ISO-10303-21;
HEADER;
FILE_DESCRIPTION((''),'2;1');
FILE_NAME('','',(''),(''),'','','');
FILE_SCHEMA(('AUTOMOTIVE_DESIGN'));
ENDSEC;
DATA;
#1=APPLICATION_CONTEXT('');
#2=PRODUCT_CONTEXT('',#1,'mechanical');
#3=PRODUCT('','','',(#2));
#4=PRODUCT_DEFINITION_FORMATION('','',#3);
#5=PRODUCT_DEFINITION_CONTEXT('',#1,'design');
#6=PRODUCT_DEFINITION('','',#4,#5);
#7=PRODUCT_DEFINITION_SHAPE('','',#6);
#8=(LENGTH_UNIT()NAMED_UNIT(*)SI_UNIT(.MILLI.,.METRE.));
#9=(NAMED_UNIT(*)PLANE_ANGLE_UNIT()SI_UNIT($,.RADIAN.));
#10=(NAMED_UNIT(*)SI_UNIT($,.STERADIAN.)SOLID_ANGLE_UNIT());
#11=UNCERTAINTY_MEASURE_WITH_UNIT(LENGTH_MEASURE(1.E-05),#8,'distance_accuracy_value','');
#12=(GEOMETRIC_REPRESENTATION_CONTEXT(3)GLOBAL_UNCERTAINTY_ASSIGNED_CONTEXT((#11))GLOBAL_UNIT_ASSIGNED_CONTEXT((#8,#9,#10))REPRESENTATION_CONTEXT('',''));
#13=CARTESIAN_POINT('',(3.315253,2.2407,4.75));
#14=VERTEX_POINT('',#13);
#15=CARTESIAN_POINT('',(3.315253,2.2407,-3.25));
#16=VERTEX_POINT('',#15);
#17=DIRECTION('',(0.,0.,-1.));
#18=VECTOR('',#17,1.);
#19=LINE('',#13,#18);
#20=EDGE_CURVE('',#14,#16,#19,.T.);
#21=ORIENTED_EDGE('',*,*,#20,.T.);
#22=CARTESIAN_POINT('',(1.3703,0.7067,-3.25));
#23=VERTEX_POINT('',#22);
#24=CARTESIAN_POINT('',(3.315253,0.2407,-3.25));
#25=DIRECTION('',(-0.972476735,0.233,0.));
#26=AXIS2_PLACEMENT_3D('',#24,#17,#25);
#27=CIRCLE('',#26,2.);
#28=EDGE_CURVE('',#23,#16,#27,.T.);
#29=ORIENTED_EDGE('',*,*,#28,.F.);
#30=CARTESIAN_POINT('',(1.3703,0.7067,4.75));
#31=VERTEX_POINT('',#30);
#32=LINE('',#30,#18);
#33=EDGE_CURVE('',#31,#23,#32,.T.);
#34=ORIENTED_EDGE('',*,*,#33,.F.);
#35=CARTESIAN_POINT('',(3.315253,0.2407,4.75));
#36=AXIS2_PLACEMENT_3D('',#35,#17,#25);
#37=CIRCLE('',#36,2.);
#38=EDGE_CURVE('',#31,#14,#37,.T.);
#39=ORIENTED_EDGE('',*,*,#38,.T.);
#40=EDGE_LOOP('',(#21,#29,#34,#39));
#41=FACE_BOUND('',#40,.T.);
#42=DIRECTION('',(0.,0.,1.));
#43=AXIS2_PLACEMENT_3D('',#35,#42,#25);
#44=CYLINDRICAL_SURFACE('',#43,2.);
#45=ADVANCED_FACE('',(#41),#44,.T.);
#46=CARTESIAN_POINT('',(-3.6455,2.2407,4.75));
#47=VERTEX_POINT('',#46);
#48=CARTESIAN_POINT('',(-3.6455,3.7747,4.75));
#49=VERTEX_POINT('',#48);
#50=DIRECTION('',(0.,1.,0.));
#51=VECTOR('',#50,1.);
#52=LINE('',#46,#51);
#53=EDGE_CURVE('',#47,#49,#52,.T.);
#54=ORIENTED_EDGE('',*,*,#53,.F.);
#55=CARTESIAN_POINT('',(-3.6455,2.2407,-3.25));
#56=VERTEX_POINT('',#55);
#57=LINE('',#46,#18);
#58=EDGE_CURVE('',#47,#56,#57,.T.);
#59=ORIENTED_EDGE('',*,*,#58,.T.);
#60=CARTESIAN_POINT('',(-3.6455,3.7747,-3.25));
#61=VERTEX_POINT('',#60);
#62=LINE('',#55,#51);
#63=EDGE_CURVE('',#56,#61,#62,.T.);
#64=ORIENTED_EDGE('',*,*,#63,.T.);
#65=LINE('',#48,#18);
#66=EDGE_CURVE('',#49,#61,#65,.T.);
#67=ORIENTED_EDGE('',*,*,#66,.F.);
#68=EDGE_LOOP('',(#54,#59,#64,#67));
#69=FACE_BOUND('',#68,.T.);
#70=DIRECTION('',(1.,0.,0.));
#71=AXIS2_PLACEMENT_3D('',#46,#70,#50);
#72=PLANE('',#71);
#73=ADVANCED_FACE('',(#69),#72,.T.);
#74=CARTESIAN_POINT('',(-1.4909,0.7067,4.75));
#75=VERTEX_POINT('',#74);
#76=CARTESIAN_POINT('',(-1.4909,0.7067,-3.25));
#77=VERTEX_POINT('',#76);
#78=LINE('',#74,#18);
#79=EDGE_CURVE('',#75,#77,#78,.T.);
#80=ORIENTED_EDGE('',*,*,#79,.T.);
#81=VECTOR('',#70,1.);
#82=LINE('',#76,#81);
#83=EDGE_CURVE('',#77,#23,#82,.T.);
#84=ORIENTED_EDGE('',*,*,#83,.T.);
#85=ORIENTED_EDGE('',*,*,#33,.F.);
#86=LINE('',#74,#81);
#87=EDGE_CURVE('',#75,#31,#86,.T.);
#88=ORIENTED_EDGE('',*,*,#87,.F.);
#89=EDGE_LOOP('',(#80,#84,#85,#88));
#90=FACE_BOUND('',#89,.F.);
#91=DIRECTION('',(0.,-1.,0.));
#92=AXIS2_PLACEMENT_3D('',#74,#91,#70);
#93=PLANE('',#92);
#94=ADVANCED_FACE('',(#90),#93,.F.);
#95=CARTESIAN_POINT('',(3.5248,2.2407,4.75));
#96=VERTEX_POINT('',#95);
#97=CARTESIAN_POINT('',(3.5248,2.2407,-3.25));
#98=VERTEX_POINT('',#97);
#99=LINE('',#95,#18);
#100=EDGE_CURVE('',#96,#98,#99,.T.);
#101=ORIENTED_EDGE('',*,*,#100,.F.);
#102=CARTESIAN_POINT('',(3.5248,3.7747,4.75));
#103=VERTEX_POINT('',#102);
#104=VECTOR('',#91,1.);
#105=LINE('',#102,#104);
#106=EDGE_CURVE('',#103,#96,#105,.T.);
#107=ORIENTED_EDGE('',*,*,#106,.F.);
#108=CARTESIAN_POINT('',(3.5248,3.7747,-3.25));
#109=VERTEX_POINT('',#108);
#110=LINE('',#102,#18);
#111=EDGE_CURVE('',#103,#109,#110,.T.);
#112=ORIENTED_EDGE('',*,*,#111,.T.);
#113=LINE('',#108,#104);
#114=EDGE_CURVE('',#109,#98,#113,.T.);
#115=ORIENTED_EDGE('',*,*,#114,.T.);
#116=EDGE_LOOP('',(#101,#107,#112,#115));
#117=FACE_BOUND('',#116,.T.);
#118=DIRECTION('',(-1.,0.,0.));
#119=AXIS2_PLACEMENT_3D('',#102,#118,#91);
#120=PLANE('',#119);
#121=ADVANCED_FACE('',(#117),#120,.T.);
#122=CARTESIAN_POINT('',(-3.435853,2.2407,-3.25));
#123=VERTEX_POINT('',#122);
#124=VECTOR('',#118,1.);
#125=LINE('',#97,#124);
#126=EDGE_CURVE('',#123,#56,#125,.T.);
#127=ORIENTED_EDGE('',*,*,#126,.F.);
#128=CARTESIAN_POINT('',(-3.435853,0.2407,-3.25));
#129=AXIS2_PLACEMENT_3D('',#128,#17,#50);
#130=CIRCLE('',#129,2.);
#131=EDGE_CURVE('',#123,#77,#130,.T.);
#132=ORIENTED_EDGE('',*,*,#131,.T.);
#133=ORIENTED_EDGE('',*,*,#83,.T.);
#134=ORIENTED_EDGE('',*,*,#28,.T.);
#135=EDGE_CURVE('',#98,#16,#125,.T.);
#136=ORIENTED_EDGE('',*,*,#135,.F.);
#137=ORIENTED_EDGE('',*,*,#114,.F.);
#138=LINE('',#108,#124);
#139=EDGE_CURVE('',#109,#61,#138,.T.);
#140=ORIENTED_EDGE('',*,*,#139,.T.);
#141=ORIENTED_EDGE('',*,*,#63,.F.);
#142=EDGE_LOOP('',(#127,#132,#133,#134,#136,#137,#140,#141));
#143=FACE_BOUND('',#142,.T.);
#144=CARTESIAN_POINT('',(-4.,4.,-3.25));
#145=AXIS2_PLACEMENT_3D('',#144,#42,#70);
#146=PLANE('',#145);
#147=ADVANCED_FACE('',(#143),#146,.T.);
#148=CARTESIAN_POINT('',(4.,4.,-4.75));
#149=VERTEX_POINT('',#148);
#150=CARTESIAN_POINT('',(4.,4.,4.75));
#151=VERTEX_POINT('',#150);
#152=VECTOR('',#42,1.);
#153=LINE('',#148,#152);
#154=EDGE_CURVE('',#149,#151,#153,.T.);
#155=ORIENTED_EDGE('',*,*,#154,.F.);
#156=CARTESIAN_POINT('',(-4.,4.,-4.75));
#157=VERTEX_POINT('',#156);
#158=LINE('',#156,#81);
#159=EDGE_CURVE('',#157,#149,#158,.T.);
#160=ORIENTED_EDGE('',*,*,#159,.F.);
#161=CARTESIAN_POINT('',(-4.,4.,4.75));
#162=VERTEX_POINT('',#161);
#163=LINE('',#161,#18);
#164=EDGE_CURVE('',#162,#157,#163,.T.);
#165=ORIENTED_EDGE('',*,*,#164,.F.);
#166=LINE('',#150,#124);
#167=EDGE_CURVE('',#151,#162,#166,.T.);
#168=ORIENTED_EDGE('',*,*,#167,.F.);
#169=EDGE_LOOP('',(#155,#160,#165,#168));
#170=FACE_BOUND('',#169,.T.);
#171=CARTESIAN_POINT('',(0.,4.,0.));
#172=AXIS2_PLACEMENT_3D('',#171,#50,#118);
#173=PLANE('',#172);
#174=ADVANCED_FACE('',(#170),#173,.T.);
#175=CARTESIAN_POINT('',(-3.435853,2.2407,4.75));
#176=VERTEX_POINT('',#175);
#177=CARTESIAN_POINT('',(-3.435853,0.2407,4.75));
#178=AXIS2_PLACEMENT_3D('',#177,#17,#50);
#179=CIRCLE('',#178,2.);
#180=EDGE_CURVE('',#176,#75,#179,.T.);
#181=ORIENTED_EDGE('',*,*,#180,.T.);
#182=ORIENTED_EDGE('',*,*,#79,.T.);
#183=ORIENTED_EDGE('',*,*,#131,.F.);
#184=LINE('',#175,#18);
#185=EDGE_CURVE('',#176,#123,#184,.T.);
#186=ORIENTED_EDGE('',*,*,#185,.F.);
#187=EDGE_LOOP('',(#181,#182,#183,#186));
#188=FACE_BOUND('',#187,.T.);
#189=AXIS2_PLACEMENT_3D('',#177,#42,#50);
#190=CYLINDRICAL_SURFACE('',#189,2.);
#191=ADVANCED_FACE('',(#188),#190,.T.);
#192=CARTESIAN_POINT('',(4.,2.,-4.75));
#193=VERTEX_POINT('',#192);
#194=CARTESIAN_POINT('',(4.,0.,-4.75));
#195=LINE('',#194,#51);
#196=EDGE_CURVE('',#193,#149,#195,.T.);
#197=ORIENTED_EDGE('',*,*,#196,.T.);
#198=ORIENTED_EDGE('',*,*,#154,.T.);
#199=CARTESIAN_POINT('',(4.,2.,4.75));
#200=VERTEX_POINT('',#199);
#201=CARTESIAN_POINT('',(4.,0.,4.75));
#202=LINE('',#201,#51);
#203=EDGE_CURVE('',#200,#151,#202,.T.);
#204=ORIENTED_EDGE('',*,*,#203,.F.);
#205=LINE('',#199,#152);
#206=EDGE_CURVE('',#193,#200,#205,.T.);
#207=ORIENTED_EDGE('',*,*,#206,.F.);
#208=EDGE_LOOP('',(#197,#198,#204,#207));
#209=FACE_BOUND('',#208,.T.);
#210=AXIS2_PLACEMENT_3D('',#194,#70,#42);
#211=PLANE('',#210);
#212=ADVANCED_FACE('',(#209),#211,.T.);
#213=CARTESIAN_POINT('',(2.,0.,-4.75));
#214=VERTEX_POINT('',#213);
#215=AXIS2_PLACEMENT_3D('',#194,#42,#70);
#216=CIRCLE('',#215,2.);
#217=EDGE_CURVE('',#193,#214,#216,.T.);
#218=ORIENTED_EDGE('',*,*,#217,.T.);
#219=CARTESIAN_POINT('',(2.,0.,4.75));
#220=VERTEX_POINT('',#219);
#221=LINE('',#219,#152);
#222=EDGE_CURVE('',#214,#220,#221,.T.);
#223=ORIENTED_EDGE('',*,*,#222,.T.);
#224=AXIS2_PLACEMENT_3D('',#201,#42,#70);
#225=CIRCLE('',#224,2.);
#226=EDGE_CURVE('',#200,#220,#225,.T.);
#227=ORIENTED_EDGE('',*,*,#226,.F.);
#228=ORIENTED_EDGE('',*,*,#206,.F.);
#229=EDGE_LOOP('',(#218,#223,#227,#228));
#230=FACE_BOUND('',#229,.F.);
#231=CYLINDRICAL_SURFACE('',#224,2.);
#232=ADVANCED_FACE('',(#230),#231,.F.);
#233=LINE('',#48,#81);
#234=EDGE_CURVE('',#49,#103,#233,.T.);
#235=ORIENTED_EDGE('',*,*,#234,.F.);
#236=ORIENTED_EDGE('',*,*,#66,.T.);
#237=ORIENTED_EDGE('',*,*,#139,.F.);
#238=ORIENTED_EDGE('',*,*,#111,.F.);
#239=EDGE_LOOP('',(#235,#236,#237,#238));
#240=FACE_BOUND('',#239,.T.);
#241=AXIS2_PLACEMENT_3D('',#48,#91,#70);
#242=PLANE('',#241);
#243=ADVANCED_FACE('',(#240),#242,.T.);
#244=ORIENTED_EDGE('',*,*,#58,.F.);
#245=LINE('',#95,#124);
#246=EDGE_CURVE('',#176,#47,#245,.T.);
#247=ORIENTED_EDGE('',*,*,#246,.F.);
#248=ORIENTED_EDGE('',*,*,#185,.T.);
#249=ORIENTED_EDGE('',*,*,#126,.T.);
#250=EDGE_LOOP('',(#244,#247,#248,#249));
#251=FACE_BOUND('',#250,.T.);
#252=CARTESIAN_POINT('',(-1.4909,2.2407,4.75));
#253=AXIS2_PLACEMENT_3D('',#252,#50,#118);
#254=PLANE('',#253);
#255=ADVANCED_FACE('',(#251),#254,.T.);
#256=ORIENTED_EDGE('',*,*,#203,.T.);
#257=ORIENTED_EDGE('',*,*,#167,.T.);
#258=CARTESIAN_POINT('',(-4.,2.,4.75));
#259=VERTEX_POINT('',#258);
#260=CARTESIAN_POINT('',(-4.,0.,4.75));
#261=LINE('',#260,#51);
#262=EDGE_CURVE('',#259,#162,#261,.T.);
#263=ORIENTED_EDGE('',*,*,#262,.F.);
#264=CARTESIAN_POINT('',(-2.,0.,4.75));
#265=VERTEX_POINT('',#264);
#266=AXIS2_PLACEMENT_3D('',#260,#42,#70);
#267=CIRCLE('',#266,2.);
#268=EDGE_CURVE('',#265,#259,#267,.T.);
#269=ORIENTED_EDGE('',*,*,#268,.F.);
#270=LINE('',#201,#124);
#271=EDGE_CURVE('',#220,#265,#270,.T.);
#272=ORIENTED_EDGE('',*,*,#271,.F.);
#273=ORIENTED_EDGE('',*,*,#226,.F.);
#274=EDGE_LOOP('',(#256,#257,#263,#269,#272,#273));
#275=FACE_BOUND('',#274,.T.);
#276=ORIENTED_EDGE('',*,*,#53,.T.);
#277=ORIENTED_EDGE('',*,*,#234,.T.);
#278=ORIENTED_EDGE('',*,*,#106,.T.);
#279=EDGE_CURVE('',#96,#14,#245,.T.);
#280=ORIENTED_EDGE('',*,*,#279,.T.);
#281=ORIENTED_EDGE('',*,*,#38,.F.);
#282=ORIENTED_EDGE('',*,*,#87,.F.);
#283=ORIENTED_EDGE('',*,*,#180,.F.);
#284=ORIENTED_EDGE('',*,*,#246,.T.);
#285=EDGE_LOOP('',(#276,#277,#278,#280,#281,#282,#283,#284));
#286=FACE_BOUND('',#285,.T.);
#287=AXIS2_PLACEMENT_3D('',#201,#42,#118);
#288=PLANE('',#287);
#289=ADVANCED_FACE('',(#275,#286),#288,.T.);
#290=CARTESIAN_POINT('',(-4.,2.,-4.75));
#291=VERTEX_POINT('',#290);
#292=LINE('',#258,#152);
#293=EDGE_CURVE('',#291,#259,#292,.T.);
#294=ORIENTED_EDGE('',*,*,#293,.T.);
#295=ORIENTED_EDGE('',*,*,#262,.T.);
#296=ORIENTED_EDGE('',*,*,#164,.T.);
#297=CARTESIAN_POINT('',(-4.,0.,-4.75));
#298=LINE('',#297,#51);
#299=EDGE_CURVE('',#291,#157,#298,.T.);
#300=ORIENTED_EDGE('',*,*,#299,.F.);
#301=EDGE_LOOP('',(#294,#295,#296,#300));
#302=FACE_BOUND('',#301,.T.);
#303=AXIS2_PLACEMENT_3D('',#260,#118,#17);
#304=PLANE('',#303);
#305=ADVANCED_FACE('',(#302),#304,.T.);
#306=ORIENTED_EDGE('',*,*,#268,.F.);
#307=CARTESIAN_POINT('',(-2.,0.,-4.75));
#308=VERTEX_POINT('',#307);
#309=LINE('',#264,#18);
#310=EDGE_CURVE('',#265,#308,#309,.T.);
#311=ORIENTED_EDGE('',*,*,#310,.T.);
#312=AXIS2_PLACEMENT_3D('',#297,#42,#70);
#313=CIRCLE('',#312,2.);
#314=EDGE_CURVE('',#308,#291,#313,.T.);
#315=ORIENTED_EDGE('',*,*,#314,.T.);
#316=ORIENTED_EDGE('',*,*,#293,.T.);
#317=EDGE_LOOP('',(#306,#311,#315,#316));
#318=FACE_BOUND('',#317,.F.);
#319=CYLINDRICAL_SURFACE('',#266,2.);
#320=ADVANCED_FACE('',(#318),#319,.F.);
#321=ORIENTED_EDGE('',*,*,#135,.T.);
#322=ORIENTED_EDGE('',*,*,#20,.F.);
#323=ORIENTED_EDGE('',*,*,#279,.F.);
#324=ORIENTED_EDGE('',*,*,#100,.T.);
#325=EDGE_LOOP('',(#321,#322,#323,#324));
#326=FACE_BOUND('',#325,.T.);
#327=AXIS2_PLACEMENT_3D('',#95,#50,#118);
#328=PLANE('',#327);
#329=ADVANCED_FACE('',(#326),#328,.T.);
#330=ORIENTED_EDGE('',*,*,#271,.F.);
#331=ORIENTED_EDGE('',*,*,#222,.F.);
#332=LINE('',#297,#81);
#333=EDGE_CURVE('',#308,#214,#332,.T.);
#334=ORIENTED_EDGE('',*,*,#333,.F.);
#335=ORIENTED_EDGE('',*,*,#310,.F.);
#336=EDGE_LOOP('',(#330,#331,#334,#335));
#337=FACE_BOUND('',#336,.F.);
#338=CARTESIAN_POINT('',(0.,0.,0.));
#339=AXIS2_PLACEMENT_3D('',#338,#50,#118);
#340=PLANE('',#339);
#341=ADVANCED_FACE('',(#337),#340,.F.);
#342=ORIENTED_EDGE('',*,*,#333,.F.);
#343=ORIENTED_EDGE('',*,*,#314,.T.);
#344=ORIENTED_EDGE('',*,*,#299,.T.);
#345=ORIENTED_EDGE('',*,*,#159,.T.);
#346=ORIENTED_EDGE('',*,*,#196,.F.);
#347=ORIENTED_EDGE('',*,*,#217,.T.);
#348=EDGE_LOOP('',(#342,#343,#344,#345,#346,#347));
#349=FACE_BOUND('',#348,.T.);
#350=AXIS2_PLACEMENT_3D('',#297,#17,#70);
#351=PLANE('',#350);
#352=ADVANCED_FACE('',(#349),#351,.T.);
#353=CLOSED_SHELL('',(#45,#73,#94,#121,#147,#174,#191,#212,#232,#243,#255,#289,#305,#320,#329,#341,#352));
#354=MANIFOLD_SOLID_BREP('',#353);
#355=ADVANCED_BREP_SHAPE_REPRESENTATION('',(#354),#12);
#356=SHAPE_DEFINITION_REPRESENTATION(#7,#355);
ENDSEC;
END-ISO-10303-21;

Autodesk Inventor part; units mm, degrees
ref_plane "YZ Plane" through (0, 0, 0) normal (1, 0, 0) x (0, 1, 0)
ref_plane "XZ Plane" through (0, 0, 0) normal (0, 1, 0) x (-1, 0, 0)
ref_plane "XY Plane" through (0, 0, 0) normal (0, 0, 1) x (1, 0, 0)
sketch "Sketch1" plane through (0, 0, 0) normal (0, 1, 0) x (-1, 0, 0)
  line L0 (-4, 4.75) -> (4, 4.75)
  line L1 (4, 4.75) -> (4, -4.75)
  line L2 (4, -4.75) -> (-4, -4.75)
  line L3 (-4, -4.75) -> (-4, 4.75)
  line L4 (-4, 4.75) -> (4, -4.75) construction
  line L5 (4, 4.75) -> (-4, -4.75) construction
  point P0 (0, 0)
  dimension "d0" = 8
  dimension "d1" = 9.5
extrude "Extrusion1" add sketch "Sketch1" along normal blind 4
sketch "Sketch2" plane through (-4, 0, 4.75) normal (0, 0, 1) x (1, 0, 0)
  circle A0 centre (0, 0) radius 2
  circle A1 centre (8, 0) radius 2
  point P0 (4, 0)
  dimension "d4" = 4
  dimension "d5" = 4
extrude "Extrusion2" cut sketch "Sketch2" against normal blind 10
sketch "Sketch3" plane through (-4, 4, 4.75) normal (0, 0, 1) x (1, 0, 0)
  line L0 (0.3545, -0.2253) -> (7.5248, -0.2253)
  line L1 (7.5248, -0.2253) -> (7.5248, -1.7593)
  line L2 (7.5248, -1.7593) -> (0.3545, -1.7593)
  line L3 (0.3545, -1.7593) -> (0.3545, -0.2253)
  line L4 (2.5091, -3.2933) -> (5.3703, -3.2933)
  line L5 (5.3703, -3.2933) -> (5.3703, -0.2253)
  line L6 (5.3703, -0.2253) -> (2.5091, -0.2253)
  line L7 (2.5091, -0.2253) -> (2.5091, -3.2933)
  line L8 (2.5091, -3.2933) -> (5.3703, -0.2253) construction
  line L9 (5.3703, -3.2933) -> (2.5091, -0.2253) construction
  point P0 (4, -4)
  point P1 (3.9397, -1.7593)
extrude "Extrusion3" cut sketch "Sketch3" against normal blind 8
fillet "Fillet1" radius 2 2 edges at (-1.4909, 2.2407, 0.75) (1.3703, 2.2407, 0.75)
properties part number "USB-slot"
